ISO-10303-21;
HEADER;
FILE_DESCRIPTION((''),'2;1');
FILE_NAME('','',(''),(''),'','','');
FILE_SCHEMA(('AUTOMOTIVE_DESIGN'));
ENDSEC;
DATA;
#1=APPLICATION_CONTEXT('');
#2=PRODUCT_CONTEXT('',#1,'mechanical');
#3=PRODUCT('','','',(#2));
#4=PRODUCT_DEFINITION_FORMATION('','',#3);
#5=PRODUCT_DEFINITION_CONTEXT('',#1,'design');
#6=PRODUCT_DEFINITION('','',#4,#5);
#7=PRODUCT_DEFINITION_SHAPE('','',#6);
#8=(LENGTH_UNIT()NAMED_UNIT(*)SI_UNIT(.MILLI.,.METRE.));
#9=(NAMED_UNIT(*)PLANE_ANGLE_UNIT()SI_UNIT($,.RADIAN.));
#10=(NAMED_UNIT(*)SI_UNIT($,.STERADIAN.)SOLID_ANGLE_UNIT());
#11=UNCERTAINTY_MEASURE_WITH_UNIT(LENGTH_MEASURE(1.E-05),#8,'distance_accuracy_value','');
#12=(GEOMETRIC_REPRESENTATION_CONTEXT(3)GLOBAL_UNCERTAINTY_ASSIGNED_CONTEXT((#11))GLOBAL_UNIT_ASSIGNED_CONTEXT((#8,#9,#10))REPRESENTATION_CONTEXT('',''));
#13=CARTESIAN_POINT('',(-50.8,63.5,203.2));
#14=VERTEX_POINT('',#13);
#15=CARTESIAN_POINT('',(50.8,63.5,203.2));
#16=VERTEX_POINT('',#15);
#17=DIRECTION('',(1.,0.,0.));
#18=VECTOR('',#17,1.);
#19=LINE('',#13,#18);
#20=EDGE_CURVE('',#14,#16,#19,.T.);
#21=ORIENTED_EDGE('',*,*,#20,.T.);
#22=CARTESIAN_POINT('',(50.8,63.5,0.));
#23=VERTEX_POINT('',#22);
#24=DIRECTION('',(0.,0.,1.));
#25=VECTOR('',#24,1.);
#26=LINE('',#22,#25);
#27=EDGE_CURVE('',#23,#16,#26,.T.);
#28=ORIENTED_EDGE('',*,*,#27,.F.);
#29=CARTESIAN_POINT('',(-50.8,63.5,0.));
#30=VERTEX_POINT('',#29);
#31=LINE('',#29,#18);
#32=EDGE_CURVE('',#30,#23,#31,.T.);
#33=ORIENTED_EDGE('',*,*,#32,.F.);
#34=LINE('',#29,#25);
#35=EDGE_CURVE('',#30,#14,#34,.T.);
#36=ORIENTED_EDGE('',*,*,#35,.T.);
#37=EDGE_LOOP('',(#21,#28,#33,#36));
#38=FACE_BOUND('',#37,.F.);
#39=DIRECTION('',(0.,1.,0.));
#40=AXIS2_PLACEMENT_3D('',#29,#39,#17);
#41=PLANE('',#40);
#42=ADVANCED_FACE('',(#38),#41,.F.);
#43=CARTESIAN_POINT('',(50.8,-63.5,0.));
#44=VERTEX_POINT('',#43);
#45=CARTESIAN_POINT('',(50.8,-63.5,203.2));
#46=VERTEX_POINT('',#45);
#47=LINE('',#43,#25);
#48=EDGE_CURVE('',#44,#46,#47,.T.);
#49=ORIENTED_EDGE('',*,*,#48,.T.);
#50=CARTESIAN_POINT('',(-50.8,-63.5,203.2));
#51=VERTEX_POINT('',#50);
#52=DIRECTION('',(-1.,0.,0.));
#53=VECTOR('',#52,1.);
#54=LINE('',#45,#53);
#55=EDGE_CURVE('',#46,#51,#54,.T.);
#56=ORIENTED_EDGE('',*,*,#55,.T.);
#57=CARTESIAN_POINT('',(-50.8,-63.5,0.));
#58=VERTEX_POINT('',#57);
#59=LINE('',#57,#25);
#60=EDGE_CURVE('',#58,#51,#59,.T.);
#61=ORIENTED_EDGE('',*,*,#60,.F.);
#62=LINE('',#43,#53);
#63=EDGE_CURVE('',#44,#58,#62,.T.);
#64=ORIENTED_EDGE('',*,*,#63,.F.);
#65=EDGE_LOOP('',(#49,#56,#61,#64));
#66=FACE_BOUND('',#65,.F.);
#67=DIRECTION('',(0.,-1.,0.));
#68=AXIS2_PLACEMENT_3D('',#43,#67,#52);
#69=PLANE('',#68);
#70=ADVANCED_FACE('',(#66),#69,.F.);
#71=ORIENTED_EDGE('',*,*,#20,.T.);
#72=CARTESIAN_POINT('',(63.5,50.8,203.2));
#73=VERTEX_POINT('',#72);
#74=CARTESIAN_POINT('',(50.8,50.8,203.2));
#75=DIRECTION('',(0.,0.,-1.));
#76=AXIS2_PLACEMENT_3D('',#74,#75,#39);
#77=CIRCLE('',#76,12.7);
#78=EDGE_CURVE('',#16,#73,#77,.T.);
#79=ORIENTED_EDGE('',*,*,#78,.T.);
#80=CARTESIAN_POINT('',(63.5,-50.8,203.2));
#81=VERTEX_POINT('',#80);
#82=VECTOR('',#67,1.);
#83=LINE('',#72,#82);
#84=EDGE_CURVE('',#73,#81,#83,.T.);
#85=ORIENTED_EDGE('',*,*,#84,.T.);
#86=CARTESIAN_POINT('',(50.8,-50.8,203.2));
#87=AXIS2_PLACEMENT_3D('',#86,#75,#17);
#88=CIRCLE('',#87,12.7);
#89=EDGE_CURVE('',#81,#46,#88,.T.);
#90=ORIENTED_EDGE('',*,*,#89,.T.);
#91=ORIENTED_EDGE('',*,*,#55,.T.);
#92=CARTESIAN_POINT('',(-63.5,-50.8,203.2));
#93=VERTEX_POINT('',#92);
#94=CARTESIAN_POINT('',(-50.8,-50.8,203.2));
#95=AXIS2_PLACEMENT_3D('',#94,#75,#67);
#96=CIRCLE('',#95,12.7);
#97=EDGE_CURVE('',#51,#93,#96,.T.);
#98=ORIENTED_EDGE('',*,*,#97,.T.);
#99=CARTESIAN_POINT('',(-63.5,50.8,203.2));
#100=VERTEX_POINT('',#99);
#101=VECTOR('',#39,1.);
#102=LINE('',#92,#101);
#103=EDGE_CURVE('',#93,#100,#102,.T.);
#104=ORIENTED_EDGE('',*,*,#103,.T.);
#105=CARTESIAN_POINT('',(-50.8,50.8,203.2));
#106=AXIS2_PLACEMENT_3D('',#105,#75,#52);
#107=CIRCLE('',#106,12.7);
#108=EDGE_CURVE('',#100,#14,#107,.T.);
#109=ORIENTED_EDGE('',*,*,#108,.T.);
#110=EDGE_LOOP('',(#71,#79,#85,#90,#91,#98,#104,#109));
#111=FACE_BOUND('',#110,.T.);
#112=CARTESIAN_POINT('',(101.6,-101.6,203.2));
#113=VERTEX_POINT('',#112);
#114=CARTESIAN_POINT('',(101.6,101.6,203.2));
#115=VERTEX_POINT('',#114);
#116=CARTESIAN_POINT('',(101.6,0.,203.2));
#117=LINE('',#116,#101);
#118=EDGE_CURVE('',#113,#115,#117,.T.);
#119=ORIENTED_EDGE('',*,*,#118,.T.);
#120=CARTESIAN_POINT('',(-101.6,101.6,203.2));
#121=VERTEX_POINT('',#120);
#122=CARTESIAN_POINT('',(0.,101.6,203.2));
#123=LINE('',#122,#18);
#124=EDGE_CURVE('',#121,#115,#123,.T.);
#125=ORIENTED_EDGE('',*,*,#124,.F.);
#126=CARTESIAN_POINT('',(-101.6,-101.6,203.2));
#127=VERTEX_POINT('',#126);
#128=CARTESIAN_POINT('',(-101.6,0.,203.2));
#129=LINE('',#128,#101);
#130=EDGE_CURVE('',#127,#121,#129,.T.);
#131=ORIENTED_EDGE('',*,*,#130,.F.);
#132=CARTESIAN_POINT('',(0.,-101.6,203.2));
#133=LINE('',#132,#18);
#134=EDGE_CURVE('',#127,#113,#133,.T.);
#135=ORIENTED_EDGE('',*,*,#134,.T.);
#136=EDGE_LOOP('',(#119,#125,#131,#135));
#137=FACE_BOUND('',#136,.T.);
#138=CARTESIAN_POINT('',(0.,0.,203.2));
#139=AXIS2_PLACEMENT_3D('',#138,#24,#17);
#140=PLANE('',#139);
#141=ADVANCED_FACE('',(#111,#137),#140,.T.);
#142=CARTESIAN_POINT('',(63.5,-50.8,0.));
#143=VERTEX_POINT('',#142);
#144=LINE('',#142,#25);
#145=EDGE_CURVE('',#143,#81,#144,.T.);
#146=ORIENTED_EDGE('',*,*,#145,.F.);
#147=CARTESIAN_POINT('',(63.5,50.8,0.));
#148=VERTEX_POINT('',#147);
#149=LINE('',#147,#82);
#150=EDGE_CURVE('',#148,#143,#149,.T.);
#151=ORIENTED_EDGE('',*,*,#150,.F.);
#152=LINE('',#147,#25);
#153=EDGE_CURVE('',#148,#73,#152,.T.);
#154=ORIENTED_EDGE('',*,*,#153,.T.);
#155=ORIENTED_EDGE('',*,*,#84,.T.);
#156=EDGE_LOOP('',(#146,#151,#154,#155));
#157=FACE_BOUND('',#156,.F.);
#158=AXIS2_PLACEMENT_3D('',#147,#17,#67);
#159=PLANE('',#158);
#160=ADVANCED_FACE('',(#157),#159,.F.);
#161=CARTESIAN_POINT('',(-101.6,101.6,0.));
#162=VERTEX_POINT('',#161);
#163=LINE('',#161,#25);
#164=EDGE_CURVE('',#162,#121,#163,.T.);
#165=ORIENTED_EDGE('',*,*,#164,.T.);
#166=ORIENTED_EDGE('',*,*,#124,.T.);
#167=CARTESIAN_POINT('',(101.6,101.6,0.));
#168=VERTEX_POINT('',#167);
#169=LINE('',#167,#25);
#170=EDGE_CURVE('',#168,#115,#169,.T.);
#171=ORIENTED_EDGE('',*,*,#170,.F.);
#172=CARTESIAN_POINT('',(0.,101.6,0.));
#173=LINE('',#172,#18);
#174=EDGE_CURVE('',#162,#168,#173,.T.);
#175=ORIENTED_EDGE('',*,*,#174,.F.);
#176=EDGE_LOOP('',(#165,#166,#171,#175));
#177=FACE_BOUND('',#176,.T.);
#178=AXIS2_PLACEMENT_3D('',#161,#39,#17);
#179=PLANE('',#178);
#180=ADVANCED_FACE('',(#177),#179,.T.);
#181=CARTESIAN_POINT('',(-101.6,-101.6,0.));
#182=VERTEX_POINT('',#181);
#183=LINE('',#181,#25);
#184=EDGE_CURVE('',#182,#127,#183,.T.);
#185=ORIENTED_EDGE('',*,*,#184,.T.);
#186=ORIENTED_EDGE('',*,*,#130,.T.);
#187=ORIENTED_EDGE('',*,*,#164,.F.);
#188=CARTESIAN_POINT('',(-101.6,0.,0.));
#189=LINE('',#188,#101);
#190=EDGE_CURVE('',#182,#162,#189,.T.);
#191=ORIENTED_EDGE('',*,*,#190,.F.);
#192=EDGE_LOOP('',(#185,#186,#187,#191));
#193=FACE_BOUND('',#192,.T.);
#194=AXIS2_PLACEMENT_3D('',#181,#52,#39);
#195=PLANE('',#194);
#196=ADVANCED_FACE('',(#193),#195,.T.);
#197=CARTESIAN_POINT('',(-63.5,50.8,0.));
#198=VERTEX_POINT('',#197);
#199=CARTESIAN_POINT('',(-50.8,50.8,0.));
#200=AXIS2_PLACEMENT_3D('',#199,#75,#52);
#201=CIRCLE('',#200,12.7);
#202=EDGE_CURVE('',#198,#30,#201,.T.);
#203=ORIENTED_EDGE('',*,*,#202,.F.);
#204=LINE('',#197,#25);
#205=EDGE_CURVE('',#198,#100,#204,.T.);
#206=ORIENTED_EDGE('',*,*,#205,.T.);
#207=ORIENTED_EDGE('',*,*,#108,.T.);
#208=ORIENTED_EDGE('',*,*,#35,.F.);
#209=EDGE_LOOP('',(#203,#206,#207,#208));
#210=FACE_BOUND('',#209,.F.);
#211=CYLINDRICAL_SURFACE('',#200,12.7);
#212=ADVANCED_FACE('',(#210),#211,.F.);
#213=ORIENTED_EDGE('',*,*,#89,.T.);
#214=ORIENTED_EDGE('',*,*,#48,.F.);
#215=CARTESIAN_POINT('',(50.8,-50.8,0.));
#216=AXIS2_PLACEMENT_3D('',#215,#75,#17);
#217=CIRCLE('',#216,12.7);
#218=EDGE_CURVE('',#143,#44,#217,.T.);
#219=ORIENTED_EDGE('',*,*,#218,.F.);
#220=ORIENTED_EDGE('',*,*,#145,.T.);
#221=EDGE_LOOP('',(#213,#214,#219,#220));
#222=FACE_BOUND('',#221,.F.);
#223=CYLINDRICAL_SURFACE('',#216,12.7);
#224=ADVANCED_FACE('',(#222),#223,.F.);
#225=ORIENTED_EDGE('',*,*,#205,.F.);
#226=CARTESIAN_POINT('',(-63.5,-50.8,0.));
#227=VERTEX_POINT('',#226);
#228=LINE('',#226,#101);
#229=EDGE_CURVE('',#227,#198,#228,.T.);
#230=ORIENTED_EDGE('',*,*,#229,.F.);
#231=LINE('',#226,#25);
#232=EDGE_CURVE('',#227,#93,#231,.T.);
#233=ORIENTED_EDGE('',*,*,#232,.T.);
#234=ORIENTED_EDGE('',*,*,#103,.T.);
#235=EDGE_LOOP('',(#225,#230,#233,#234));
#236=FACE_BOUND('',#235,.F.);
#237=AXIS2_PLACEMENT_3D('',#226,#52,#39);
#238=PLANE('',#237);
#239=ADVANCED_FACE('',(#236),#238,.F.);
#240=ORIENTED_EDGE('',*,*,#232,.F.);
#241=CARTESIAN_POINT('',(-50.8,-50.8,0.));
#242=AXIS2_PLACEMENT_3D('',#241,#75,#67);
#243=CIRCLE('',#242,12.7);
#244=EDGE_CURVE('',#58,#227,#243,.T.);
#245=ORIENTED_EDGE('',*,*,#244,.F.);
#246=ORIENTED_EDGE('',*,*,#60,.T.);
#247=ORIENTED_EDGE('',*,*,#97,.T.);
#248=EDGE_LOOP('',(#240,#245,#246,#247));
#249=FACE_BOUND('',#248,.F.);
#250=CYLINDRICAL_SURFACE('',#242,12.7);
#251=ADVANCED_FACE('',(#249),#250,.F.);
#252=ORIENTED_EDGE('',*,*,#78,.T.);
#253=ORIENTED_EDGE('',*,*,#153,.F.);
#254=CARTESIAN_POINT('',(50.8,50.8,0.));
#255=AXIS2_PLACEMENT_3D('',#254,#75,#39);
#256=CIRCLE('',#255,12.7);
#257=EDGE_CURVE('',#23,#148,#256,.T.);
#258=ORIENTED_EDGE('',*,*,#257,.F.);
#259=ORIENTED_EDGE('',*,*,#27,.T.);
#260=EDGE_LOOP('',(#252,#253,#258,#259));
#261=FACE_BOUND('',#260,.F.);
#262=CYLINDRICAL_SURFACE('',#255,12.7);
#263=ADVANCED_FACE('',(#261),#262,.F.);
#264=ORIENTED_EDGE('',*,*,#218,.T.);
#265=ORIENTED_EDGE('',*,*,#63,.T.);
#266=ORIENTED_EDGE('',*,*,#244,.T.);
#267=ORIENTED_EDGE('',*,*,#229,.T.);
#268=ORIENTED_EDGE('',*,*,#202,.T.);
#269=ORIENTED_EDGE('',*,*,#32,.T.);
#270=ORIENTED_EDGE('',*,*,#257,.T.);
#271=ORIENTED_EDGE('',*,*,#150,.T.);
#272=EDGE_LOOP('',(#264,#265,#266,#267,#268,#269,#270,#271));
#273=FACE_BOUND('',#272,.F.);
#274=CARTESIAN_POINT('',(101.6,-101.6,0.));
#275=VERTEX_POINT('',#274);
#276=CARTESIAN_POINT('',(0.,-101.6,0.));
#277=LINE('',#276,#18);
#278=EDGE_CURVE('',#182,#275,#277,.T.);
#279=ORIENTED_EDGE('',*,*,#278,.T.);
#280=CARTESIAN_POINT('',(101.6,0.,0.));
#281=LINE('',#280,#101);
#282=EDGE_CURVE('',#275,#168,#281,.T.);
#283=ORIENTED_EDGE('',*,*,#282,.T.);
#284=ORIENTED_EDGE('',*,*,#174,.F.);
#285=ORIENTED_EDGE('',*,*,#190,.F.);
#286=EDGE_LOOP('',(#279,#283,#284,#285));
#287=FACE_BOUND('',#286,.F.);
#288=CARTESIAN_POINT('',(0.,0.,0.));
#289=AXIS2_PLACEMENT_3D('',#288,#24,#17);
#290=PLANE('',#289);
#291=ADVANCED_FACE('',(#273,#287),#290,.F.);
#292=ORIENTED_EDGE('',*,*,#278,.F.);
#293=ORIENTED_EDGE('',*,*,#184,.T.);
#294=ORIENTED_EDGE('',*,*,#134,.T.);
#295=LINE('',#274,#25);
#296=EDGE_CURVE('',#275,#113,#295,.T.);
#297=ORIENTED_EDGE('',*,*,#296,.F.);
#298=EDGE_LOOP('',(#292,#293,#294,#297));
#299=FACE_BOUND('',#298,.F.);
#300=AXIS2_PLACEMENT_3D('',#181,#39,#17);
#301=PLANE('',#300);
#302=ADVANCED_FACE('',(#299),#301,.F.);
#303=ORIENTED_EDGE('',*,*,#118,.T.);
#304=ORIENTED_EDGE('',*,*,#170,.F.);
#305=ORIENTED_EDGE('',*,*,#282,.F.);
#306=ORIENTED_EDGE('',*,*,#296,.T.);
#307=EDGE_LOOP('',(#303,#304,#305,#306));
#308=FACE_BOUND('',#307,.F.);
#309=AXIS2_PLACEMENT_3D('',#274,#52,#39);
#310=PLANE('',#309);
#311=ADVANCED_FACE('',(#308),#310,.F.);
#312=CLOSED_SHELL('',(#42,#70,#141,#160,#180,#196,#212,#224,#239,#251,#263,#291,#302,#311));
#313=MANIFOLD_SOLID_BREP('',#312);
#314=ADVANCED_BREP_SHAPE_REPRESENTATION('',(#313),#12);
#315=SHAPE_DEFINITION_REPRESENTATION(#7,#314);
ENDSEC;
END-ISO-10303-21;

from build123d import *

# Parameters (mm, degrees)
F1_W     = 203.2
F1_H     = 203.2
F2_DEPTH = 203.2


# Not quite as in the source:
# - a variable given as a bare number and used for a length is read in inches; the dataset says mm whatever the document's units were


with BuildPart() as f2:
    # F1 (on Top) → F2 (new body)
    with BuildSketch(Plane.XY):
        Rectangle(F1_W, F1_H)
        with BuildLine():
            Line((-50.8, 63.5), (50.8, 63.5))
            ThreePointArc((50.8, 63.5), (59.7802561211, 59.7802561211), (63.5, 50.8))
            Line((63.5, 50.8), (63.5, -50.8))
            ThreePointArc((63.5, -50.8), (59.7802561211, -59.7802561211), (50.8, -63.5))
            Line((50.8, -63.5), (-50.8, -63.5))
            ThreePointArc((-50.8, -63.5), (-59.7802561211, -59.7802561211), (-63.5, -50.8))
            Line((-63.5, -50.8), (-63.5, 50.8))
            ThreePointArc((-63.5, 50.8), (-59.7802561211, 59.7802561211), (-50.8, 63.5))
        make_face(mode=Mode.SUBTRACT)
    extrude(amount=F2_DEPTH)


solid = f2.part
